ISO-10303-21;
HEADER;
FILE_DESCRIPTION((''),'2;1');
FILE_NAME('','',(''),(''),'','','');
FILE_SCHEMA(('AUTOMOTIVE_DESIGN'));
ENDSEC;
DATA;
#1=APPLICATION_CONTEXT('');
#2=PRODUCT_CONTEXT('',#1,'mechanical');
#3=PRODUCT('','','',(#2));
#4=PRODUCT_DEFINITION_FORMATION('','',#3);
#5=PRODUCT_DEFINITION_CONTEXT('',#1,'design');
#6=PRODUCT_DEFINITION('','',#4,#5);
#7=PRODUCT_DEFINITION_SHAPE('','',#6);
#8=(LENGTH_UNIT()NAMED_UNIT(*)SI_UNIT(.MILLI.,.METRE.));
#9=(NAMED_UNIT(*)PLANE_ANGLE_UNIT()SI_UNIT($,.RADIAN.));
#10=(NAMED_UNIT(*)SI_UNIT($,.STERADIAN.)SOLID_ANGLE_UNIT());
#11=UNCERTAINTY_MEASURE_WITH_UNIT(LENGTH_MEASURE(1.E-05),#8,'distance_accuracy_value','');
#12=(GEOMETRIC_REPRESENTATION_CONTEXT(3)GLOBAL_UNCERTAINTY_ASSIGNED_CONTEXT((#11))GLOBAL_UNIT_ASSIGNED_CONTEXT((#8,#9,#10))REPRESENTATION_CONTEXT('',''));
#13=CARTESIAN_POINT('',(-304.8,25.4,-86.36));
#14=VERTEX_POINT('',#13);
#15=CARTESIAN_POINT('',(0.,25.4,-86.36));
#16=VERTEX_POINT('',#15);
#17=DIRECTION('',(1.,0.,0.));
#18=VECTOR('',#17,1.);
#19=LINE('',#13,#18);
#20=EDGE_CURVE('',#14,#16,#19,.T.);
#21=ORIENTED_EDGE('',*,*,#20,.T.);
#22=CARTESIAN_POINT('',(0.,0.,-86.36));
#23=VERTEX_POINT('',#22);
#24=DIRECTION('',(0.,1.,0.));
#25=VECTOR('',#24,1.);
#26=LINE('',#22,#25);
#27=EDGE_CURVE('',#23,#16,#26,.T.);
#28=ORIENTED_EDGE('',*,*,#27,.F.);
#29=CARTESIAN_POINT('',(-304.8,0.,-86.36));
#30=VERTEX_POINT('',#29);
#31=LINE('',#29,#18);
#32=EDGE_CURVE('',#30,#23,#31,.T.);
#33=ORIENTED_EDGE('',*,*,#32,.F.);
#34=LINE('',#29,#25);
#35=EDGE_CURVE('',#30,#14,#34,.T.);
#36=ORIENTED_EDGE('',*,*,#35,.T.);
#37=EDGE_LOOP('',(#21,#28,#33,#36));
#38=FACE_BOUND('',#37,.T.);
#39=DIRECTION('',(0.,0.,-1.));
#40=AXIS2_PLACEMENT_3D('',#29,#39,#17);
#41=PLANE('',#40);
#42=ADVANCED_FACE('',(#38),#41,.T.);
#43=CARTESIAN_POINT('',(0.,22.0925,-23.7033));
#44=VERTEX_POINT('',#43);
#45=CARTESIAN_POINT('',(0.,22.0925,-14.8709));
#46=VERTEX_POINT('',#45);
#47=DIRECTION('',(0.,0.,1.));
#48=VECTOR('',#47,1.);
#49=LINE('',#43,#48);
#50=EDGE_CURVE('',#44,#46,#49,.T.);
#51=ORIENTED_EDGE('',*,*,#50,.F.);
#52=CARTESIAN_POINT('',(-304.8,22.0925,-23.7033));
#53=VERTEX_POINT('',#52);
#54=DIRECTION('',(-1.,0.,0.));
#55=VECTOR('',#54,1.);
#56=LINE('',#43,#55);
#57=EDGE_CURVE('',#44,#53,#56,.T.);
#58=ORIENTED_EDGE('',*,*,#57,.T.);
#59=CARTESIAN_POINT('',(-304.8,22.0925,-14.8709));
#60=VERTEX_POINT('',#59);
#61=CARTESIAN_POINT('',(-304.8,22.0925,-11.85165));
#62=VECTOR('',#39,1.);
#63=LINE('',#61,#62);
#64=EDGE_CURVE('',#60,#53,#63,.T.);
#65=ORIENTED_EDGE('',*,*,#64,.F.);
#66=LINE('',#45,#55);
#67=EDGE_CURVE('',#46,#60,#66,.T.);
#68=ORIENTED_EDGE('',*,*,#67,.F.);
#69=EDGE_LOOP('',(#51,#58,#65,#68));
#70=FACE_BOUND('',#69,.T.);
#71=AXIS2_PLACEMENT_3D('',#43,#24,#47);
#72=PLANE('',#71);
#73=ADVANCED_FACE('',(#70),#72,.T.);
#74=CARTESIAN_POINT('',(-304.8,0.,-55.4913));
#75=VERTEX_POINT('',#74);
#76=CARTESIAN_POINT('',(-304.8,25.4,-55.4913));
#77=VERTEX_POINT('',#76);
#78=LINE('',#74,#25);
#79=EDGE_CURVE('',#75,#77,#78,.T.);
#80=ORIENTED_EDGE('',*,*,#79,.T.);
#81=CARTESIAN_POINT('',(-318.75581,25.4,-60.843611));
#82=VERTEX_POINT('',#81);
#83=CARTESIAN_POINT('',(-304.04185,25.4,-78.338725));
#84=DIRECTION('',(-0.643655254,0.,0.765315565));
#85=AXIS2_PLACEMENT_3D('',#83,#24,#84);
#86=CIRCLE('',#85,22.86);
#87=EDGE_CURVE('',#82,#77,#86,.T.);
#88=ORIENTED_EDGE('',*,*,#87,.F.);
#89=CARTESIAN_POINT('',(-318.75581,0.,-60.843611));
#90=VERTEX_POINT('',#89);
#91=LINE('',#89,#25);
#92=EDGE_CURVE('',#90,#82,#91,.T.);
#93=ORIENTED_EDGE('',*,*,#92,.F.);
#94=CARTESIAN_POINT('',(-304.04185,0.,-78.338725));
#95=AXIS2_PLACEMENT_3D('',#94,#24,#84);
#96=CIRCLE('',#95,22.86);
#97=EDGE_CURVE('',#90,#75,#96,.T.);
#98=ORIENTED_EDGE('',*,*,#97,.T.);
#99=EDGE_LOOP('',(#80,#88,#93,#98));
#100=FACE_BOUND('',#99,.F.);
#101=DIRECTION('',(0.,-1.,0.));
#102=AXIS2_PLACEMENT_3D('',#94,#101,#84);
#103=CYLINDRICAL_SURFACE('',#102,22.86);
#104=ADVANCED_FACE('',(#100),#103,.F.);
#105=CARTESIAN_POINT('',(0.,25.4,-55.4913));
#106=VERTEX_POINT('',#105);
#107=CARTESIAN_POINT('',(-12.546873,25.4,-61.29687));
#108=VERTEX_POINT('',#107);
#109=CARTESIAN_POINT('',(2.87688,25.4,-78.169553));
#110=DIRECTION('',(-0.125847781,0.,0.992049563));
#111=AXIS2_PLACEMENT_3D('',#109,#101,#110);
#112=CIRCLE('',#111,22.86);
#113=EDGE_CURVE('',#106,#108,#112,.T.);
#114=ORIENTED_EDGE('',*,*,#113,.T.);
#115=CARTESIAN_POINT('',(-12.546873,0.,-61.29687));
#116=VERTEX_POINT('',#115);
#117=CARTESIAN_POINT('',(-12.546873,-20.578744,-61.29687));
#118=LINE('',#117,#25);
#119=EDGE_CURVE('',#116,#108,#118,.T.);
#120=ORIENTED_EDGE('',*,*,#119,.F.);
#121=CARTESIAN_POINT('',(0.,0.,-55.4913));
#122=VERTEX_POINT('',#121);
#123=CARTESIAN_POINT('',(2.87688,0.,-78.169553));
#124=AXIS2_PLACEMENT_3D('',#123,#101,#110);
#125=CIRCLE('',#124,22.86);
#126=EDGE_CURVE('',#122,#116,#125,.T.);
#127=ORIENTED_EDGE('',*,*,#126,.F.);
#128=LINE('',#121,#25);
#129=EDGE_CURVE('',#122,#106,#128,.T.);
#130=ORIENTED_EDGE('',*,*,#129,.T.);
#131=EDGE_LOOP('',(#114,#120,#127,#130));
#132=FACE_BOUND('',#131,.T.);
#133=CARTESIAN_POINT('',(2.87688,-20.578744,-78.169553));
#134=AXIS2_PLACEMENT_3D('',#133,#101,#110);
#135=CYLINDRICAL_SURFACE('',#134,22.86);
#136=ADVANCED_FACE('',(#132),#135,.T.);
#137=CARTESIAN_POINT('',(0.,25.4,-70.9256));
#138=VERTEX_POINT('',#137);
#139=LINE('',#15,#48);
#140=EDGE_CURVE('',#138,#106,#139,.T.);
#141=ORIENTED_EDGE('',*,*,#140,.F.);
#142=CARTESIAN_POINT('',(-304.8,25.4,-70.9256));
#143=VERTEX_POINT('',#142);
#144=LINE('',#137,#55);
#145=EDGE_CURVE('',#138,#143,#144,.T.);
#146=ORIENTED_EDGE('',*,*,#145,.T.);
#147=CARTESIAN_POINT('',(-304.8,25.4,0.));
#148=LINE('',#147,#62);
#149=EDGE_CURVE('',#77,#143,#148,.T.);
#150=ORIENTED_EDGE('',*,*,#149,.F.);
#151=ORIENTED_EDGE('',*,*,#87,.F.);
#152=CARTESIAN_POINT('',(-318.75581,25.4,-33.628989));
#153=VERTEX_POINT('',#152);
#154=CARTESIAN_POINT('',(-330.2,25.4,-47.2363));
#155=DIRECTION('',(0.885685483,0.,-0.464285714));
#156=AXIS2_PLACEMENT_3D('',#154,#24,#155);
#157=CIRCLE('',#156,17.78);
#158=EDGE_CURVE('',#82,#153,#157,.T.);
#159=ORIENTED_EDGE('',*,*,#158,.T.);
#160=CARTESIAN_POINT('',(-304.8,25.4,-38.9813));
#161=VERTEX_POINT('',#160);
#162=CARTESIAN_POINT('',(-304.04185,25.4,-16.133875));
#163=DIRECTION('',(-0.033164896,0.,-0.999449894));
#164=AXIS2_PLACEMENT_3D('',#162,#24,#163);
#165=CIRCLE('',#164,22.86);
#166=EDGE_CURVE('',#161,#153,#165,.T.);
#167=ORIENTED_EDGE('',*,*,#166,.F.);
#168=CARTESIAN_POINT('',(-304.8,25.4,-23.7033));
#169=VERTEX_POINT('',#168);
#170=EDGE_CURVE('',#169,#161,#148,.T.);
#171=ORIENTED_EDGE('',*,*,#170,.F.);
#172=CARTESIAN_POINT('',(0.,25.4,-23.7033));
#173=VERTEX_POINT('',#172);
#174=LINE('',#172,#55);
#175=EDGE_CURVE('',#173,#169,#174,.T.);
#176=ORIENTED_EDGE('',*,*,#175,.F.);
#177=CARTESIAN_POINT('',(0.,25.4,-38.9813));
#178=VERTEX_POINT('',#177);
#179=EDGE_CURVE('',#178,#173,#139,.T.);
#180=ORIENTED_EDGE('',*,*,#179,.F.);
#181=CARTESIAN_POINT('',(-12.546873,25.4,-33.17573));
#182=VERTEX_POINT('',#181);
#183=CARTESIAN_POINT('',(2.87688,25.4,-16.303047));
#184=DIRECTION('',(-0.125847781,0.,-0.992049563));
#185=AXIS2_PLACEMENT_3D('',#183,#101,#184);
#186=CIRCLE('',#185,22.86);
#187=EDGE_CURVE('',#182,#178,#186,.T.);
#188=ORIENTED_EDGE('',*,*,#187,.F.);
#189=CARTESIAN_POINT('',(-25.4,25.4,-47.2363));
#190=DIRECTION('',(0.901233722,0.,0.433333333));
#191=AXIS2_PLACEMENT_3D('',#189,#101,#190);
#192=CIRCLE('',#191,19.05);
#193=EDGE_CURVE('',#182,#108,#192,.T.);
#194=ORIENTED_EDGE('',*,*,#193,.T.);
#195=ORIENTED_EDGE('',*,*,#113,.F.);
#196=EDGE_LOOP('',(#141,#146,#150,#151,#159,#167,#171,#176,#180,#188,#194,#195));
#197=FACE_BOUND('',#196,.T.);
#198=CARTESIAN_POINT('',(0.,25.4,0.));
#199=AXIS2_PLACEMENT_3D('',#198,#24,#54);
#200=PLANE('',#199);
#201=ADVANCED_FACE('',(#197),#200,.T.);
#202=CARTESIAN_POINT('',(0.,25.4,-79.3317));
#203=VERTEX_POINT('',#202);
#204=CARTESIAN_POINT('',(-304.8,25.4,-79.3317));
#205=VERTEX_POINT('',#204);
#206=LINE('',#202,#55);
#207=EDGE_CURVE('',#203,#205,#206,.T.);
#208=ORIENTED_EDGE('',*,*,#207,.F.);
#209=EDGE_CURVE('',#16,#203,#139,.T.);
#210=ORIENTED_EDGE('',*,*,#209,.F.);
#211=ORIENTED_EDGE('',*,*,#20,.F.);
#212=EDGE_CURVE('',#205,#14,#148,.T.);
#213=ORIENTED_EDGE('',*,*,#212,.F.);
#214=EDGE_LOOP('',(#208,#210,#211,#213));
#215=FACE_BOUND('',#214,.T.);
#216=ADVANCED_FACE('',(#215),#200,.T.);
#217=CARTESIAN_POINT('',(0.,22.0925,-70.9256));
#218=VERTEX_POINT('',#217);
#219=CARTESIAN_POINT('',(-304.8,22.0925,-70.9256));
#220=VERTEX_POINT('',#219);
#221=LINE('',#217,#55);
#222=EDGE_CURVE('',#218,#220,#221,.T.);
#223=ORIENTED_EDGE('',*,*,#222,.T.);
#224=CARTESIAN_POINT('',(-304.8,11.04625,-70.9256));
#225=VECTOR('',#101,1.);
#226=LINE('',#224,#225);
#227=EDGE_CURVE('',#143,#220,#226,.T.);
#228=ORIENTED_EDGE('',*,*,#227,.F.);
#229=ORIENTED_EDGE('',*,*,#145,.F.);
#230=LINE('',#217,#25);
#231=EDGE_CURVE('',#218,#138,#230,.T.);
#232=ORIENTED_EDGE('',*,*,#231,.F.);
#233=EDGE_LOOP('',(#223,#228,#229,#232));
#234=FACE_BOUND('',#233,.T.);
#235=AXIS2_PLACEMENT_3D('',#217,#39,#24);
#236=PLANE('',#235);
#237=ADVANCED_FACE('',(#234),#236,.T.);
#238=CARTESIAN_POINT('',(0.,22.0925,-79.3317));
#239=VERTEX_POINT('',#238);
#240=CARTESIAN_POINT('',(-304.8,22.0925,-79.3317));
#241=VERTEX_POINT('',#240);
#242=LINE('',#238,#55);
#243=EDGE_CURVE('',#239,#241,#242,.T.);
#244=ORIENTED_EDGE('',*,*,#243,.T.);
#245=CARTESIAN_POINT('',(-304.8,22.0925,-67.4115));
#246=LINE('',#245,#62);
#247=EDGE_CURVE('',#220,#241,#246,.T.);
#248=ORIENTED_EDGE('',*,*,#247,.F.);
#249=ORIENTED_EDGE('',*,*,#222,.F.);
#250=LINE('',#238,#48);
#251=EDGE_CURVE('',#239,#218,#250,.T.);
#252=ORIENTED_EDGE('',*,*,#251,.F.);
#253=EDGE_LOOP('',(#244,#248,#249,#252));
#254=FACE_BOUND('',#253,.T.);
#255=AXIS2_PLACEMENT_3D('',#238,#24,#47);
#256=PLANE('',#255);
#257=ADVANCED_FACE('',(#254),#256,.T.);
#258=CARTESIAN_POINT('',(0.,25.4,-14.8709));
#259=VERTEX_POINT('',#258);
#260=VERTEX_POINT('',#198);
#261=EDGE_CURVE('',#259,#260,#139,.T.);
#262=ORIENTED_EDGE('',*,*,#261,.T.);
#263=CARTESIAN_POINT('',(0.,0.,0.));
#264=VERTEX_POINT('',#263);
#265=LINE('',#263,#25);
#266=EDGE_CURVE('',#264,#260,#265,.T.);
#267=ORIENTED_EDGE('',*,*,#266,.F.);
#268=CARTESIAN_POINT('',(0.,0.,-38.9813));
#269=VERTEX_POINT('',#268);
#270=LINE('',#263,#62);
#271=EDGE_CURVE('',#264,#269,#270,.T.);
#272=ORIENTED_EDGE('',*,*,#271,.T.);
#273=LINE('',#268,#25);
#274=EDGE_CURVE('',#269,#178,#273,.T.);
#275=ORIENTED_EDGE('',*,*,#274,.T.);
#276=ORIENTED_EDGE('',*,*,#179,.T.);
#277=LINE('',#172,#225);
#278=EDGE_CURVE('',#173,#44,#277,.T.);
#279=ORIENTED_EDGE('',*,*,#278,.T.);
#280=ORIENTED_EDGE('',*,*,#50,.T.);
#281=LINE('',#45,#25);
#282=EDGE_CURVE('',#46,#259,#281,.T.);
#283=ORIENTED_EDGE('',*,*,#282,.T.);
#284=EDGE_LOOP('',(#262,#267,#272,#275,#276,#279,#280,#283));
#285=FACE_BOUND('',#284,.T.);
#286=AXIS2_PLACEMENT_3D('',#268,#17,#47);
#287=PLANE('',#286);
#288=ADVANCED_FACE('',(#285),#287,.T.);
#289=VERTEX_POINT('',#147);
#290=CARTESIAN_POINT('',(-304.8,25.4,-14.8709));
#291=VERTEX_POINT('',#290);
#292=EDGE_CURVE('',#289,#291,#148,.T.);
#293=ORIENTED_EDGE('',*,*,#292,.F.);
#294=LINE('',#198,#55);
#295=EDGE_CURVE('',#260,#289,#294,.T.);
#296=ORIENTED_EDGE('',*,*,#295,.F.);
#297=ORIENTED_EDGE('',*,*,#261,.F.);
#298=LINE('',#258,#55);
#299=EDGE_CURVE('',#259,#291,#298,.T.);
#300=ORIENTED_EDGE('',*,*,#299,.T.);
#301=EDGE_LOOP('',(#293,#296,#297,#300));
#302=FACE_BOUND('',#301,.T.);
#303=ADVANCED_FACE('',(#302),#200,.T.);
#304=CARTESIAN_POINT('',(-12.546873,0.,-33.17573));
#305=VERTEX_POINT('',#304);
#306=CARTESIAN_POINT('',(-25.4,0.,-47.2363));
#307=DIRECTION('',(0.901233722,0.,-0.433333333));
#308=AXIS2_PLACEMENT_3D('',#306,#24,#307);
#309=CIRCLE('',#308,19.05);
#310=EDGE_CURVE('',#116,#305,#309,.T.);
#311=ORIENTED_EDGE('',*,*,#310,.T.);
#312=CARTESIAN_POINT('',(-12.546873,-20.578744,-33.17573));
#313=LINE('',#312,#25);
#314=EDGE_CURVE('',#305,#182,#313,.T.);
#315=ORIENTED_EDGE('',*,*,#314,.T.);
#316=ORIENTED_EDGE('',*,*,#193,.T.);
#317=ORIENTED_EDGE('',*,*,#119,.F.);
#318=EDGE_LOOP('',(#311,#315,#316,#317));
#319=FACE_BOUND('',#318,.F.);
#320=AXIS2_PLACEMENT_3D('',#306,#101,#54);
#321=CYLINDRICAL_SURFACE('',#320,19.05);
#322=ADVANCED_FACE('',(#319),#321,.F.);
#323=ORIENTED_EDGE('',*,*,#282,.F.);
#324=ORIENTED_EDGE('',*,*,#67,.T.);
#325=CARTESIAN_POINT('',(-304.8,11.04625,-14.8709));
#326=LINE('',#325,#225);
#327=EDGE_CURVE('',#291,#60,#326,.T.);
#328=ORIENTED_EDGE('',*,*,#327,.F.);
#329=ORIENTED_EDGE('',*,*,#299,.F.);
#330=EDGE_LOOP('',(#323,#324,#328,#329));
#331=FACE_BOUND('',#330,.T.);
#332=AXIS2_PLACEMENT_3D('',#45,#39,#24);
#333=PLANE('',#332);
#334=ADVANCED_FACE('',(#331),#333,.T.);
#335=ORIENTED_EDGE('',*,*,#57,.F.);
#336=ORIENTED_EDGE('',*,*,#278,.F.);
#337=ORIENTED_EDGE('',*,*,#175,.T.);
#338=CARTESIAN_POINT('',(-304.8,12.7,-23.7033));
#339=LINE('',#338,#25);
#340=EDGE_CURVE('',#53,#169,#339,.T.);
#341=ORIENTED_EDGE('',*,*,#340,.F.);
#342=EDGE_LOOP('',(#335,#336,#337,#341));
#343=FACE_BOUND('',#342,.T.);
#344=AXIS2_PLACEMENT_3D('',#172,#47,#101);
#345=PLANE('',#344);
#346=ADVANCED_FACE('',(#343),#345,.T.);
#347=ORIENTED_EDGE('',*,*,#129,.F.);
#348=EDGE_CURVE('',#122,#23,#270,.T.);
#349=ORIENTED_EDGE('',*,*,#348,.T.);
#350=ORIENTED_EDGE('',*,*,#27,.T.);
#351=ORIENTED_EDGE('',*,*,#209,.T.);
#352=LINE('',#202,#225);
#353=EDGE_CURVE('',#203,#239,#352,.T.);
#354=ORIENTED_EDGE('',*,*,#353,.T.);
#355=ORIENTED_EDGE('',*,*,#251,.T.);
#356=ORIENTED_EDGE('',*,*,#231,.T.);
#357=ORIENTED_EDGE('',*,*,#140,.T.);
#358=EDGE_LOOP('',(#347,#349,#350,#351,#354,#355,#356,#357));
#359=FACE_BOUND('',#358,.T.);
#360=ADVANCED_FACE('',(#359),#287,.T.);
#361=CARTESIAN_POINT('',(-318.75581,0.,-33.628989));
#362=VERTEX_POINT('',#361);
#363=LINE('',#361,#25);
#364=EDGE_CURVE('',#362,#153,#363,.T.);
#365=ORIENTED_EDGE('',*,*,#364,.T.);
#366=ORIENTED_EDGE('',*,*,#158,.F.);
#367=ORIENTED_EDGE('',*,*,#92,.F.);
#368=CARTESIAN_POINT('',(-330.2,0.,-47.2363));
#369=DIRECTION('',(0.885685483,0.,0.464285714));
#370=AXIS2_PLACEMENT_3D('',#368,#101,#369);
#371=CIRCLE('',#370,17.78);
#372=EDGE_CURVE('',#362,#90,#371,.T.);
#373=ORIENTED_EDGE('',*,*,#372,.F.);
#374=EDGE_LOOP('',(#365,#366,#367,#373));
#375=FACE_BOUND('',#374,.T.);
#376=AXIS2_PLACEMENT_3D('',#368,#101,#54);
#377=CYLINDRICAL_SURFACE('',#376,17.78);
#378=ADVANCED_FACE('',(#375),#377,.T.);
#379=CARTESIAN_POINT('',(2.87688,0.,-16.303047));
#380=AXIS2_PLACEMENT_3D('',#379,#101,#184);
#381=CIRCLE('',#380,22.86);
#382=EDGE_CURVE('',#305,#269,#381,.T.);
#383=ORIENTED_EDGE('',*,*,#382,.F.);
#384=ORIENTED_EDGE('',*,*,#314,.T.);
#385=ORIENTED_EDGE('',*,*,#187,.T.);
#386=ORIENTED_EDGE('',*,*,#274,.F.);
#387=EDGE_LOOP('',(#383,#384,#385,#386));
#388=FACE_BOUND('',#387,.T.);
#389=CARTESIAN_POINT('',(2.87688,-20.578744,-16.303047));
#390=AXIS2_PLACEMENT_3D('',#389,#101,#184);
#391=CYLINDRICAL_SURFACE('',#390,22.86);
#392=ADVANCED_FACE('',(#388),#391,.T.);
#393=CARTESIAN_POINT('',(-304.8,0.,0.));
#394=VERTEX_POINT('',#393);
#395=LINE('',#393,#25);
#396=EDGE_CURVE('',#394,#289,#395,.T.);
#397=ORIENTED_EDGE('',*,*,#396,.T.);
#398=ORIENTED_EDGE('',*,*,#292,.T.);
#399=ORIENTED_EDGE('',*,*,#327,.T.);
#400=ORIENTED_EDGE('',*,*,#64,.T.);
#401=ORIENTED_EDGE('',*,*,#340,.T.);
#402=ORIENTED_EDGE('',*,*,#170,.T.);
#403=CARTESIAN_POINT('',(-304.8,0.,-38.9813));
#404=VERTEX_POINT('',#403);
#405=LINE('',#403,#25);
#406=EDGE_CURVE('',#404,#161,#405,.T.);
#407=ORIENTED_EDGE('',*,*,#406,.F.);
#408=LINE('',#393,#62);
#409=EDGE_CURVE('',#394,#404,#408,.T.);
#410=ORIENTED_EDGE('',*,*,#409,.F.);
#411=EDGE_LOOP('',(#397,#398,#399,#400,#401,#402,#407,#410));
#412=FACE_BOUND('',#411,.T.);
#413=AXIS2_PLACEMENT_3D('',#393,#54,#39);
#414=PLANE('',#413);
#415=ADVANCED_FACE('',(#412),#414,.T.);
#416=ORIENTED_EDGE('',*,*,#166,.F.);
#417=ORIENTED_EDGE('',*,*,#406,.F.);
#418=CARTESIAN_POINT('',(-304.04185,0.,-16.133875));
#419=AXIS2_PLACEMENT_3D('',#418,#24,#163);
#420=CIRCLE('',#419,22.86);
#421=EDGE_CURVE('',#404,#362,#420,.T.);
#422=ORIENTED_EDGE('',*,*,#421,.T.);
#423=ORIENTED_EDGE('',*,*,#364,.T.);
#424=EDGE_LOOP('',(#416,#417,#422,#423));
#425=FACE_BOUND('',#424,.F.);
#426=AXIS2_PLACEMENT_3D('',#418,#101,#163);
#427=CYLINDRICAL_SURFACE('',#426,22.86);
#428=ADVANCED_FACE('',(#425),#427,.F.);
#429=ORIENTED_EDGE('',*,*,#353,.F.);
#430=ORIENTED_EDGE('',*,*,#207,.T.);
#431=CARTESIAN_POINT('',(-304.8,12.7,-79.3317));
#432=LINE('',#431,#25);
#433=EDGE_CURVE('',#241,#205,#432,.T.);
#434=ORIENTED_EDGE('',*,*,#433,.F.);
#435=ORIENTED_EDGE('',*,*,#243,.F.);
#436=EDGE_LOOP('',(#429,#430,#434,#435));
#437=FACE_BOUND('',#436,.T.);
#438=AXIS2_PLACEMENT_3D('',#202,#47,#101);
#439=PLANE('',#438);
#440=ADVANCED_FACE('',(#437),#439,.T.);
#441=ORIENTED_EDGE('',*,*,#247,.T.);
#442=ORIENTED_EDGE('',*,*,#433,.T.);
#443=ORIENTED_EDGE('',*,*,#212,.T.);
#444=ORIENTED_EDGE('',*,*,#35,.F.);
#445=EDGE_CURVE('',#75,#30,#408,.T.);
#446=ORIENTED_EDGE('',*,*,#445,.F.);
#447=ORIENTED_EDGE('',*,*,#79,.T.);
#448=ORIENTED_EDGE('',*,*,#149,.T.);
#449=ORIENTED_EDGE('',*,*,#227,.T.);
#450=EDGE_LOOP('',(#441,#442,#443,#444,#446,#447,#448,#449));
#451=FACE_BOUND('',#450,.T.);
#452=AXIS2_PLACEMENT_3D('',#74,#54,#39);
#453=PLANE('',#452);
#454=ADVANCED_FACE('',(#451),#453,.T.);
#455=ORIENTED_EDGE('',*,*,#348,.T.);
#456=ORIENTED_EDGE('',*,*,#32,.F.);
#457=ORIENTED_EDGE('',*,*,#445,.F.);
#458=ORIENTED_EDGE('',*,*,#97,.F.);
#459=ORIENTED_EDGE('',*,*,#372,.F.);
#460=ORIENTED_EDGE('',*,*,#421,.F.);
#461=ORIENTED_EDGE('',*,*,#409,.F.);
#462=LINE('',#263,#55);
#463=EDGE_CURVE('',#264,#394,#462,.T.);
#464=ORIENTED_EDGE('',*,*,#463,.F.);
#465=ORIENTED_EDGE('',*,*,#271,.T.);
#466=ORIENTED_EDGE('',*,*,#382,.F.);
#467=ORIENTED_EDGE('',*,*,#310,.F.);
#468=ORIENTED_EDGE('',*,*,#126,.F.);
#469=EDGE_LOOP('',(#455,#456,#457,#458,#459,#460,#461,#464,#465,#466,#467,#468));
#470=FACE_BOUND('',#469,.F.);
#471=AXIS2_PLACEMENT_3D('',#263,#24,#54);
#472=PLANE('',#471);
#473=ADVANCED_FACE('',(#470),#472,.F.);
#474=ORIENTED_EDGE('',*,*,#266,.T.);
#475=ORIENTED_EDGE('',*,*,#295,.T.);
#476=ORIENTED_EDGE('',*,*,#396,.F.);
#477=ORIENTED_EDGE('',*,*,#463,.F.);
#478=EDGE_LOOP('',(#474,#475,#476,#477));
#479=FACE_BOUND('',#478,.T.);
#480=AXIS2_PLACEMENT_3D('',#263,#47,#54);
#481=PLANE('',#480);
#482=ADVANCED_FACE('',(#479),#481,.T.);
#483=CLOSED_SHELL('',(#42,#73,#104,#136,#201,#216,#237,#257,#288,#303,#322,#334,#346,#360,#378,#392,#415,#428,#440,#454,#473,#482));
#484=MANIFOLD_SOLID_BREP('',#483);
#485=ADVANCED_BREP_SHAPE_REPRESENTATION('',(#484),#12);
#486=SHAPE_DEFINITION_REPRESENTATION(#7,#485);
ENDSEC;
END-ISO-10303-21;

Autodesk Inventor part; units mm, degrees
ref_plane "YZ Plane" through (0, 0, 0) normal (1, 0, 0) x (0, 1, 0)
ref_plane "XZ Plane" through (0, 0, 0) normal (0, 1, 0) x (-1, 0, 0)
ref_plane "XY Plane" through (0, 0, 0) normal (0, 0, 1) x (1, 0, 0)
sketch "Sketch1" plane through (0, 0, 0) normal (0, 1, 0) x (-1, 0, 0)
  line L0 (0, 0) -> (304.8, 0)
  line L1 (304.8, 0) -> (304.8, -86.36)
  line L2 (304.8, -86.36) -> (0, -86.36)
  line L3 (0, -86.36) -> (0, 0)
  circle A0 centre (25.4, -47.2363) radius 19.05
  circle A1 centre (330.2, -47.2363) radius 17.78
  line L4 (34.5288, -55.4913) -> (0, -55.4913)
  line L5 (34.5288, -38.9813) -> (0, -38.9813)
  line L6 (34.5288, -38.9813) -> (34.5288, -55.4913)
  line L7 (0, -38.9813) -> (0, -55.4913)
  line L8 (331.681, -55.4913) -> (282.1836, -55.4913)
  line L9 (331.681, -38.9813) -> (282.1836, -38.9813)
  line L10 (331.681, -38.9813) -> (331.681, -55.4913)
  line L11 (282.1836, -38.9813) -> (282.1836, -55.4913)
  dimension "d0" = 304.8
  dimension "d1" = 86.36
extrude "Extrusion1" add sketch "Sketch1" along normal blind 25.4
extrude "Extrusion2" cut sketch "Sketch1" along normal blind 25.4 contours L5 A0 L4 L3 | L5 L6 L4 A0 | A0 L4 L6 L5
fillet "Fillet1" radius 22.86 4 edges at (-8.2315, 12.7, -55.4913) (-8.2315, 12.7, -38.9813) (-314.4525, 12.7, -38.9813) (-314.4525, 12.7, -55.4913)
sketch "Sketch2" plane through (0, 0, 0) normal (1, 0, 0) x (0, 0, -1)
  line L0 (38.9813, 25.4) -> (0, 25.4) projected
  line L1 (14.8709, 25.4) -> (23.7033, 25.4)
  line L2 (23.7033, 25.4) -> (23.7033, 22.0925)
  line L3 (23.7033, 22.0925) -> (14.8709, 22.0925)
  line L4 (14.8709, 22.0925) -> (14.8709, 25.4)
  line L5 (86.36, 25.4) -> (55.4913, 25.4) projected
  line L6 (70.9256, 25.4) -> (79.3317, 25.4)
  line L7 (79.3317, 25.4) -> (79.3317, 22.0925)
  line L8 (79.3317, 22.0925) -> (70.9256, 22.0925)
  line L9 (70.9256, 22.0925) -> (70.9256, 25.4)
  point P0 (0, 0)
extrude "Extrusion3" cut sketch "Sketch2" against normal blind 379.4125
properties part number "train track"
